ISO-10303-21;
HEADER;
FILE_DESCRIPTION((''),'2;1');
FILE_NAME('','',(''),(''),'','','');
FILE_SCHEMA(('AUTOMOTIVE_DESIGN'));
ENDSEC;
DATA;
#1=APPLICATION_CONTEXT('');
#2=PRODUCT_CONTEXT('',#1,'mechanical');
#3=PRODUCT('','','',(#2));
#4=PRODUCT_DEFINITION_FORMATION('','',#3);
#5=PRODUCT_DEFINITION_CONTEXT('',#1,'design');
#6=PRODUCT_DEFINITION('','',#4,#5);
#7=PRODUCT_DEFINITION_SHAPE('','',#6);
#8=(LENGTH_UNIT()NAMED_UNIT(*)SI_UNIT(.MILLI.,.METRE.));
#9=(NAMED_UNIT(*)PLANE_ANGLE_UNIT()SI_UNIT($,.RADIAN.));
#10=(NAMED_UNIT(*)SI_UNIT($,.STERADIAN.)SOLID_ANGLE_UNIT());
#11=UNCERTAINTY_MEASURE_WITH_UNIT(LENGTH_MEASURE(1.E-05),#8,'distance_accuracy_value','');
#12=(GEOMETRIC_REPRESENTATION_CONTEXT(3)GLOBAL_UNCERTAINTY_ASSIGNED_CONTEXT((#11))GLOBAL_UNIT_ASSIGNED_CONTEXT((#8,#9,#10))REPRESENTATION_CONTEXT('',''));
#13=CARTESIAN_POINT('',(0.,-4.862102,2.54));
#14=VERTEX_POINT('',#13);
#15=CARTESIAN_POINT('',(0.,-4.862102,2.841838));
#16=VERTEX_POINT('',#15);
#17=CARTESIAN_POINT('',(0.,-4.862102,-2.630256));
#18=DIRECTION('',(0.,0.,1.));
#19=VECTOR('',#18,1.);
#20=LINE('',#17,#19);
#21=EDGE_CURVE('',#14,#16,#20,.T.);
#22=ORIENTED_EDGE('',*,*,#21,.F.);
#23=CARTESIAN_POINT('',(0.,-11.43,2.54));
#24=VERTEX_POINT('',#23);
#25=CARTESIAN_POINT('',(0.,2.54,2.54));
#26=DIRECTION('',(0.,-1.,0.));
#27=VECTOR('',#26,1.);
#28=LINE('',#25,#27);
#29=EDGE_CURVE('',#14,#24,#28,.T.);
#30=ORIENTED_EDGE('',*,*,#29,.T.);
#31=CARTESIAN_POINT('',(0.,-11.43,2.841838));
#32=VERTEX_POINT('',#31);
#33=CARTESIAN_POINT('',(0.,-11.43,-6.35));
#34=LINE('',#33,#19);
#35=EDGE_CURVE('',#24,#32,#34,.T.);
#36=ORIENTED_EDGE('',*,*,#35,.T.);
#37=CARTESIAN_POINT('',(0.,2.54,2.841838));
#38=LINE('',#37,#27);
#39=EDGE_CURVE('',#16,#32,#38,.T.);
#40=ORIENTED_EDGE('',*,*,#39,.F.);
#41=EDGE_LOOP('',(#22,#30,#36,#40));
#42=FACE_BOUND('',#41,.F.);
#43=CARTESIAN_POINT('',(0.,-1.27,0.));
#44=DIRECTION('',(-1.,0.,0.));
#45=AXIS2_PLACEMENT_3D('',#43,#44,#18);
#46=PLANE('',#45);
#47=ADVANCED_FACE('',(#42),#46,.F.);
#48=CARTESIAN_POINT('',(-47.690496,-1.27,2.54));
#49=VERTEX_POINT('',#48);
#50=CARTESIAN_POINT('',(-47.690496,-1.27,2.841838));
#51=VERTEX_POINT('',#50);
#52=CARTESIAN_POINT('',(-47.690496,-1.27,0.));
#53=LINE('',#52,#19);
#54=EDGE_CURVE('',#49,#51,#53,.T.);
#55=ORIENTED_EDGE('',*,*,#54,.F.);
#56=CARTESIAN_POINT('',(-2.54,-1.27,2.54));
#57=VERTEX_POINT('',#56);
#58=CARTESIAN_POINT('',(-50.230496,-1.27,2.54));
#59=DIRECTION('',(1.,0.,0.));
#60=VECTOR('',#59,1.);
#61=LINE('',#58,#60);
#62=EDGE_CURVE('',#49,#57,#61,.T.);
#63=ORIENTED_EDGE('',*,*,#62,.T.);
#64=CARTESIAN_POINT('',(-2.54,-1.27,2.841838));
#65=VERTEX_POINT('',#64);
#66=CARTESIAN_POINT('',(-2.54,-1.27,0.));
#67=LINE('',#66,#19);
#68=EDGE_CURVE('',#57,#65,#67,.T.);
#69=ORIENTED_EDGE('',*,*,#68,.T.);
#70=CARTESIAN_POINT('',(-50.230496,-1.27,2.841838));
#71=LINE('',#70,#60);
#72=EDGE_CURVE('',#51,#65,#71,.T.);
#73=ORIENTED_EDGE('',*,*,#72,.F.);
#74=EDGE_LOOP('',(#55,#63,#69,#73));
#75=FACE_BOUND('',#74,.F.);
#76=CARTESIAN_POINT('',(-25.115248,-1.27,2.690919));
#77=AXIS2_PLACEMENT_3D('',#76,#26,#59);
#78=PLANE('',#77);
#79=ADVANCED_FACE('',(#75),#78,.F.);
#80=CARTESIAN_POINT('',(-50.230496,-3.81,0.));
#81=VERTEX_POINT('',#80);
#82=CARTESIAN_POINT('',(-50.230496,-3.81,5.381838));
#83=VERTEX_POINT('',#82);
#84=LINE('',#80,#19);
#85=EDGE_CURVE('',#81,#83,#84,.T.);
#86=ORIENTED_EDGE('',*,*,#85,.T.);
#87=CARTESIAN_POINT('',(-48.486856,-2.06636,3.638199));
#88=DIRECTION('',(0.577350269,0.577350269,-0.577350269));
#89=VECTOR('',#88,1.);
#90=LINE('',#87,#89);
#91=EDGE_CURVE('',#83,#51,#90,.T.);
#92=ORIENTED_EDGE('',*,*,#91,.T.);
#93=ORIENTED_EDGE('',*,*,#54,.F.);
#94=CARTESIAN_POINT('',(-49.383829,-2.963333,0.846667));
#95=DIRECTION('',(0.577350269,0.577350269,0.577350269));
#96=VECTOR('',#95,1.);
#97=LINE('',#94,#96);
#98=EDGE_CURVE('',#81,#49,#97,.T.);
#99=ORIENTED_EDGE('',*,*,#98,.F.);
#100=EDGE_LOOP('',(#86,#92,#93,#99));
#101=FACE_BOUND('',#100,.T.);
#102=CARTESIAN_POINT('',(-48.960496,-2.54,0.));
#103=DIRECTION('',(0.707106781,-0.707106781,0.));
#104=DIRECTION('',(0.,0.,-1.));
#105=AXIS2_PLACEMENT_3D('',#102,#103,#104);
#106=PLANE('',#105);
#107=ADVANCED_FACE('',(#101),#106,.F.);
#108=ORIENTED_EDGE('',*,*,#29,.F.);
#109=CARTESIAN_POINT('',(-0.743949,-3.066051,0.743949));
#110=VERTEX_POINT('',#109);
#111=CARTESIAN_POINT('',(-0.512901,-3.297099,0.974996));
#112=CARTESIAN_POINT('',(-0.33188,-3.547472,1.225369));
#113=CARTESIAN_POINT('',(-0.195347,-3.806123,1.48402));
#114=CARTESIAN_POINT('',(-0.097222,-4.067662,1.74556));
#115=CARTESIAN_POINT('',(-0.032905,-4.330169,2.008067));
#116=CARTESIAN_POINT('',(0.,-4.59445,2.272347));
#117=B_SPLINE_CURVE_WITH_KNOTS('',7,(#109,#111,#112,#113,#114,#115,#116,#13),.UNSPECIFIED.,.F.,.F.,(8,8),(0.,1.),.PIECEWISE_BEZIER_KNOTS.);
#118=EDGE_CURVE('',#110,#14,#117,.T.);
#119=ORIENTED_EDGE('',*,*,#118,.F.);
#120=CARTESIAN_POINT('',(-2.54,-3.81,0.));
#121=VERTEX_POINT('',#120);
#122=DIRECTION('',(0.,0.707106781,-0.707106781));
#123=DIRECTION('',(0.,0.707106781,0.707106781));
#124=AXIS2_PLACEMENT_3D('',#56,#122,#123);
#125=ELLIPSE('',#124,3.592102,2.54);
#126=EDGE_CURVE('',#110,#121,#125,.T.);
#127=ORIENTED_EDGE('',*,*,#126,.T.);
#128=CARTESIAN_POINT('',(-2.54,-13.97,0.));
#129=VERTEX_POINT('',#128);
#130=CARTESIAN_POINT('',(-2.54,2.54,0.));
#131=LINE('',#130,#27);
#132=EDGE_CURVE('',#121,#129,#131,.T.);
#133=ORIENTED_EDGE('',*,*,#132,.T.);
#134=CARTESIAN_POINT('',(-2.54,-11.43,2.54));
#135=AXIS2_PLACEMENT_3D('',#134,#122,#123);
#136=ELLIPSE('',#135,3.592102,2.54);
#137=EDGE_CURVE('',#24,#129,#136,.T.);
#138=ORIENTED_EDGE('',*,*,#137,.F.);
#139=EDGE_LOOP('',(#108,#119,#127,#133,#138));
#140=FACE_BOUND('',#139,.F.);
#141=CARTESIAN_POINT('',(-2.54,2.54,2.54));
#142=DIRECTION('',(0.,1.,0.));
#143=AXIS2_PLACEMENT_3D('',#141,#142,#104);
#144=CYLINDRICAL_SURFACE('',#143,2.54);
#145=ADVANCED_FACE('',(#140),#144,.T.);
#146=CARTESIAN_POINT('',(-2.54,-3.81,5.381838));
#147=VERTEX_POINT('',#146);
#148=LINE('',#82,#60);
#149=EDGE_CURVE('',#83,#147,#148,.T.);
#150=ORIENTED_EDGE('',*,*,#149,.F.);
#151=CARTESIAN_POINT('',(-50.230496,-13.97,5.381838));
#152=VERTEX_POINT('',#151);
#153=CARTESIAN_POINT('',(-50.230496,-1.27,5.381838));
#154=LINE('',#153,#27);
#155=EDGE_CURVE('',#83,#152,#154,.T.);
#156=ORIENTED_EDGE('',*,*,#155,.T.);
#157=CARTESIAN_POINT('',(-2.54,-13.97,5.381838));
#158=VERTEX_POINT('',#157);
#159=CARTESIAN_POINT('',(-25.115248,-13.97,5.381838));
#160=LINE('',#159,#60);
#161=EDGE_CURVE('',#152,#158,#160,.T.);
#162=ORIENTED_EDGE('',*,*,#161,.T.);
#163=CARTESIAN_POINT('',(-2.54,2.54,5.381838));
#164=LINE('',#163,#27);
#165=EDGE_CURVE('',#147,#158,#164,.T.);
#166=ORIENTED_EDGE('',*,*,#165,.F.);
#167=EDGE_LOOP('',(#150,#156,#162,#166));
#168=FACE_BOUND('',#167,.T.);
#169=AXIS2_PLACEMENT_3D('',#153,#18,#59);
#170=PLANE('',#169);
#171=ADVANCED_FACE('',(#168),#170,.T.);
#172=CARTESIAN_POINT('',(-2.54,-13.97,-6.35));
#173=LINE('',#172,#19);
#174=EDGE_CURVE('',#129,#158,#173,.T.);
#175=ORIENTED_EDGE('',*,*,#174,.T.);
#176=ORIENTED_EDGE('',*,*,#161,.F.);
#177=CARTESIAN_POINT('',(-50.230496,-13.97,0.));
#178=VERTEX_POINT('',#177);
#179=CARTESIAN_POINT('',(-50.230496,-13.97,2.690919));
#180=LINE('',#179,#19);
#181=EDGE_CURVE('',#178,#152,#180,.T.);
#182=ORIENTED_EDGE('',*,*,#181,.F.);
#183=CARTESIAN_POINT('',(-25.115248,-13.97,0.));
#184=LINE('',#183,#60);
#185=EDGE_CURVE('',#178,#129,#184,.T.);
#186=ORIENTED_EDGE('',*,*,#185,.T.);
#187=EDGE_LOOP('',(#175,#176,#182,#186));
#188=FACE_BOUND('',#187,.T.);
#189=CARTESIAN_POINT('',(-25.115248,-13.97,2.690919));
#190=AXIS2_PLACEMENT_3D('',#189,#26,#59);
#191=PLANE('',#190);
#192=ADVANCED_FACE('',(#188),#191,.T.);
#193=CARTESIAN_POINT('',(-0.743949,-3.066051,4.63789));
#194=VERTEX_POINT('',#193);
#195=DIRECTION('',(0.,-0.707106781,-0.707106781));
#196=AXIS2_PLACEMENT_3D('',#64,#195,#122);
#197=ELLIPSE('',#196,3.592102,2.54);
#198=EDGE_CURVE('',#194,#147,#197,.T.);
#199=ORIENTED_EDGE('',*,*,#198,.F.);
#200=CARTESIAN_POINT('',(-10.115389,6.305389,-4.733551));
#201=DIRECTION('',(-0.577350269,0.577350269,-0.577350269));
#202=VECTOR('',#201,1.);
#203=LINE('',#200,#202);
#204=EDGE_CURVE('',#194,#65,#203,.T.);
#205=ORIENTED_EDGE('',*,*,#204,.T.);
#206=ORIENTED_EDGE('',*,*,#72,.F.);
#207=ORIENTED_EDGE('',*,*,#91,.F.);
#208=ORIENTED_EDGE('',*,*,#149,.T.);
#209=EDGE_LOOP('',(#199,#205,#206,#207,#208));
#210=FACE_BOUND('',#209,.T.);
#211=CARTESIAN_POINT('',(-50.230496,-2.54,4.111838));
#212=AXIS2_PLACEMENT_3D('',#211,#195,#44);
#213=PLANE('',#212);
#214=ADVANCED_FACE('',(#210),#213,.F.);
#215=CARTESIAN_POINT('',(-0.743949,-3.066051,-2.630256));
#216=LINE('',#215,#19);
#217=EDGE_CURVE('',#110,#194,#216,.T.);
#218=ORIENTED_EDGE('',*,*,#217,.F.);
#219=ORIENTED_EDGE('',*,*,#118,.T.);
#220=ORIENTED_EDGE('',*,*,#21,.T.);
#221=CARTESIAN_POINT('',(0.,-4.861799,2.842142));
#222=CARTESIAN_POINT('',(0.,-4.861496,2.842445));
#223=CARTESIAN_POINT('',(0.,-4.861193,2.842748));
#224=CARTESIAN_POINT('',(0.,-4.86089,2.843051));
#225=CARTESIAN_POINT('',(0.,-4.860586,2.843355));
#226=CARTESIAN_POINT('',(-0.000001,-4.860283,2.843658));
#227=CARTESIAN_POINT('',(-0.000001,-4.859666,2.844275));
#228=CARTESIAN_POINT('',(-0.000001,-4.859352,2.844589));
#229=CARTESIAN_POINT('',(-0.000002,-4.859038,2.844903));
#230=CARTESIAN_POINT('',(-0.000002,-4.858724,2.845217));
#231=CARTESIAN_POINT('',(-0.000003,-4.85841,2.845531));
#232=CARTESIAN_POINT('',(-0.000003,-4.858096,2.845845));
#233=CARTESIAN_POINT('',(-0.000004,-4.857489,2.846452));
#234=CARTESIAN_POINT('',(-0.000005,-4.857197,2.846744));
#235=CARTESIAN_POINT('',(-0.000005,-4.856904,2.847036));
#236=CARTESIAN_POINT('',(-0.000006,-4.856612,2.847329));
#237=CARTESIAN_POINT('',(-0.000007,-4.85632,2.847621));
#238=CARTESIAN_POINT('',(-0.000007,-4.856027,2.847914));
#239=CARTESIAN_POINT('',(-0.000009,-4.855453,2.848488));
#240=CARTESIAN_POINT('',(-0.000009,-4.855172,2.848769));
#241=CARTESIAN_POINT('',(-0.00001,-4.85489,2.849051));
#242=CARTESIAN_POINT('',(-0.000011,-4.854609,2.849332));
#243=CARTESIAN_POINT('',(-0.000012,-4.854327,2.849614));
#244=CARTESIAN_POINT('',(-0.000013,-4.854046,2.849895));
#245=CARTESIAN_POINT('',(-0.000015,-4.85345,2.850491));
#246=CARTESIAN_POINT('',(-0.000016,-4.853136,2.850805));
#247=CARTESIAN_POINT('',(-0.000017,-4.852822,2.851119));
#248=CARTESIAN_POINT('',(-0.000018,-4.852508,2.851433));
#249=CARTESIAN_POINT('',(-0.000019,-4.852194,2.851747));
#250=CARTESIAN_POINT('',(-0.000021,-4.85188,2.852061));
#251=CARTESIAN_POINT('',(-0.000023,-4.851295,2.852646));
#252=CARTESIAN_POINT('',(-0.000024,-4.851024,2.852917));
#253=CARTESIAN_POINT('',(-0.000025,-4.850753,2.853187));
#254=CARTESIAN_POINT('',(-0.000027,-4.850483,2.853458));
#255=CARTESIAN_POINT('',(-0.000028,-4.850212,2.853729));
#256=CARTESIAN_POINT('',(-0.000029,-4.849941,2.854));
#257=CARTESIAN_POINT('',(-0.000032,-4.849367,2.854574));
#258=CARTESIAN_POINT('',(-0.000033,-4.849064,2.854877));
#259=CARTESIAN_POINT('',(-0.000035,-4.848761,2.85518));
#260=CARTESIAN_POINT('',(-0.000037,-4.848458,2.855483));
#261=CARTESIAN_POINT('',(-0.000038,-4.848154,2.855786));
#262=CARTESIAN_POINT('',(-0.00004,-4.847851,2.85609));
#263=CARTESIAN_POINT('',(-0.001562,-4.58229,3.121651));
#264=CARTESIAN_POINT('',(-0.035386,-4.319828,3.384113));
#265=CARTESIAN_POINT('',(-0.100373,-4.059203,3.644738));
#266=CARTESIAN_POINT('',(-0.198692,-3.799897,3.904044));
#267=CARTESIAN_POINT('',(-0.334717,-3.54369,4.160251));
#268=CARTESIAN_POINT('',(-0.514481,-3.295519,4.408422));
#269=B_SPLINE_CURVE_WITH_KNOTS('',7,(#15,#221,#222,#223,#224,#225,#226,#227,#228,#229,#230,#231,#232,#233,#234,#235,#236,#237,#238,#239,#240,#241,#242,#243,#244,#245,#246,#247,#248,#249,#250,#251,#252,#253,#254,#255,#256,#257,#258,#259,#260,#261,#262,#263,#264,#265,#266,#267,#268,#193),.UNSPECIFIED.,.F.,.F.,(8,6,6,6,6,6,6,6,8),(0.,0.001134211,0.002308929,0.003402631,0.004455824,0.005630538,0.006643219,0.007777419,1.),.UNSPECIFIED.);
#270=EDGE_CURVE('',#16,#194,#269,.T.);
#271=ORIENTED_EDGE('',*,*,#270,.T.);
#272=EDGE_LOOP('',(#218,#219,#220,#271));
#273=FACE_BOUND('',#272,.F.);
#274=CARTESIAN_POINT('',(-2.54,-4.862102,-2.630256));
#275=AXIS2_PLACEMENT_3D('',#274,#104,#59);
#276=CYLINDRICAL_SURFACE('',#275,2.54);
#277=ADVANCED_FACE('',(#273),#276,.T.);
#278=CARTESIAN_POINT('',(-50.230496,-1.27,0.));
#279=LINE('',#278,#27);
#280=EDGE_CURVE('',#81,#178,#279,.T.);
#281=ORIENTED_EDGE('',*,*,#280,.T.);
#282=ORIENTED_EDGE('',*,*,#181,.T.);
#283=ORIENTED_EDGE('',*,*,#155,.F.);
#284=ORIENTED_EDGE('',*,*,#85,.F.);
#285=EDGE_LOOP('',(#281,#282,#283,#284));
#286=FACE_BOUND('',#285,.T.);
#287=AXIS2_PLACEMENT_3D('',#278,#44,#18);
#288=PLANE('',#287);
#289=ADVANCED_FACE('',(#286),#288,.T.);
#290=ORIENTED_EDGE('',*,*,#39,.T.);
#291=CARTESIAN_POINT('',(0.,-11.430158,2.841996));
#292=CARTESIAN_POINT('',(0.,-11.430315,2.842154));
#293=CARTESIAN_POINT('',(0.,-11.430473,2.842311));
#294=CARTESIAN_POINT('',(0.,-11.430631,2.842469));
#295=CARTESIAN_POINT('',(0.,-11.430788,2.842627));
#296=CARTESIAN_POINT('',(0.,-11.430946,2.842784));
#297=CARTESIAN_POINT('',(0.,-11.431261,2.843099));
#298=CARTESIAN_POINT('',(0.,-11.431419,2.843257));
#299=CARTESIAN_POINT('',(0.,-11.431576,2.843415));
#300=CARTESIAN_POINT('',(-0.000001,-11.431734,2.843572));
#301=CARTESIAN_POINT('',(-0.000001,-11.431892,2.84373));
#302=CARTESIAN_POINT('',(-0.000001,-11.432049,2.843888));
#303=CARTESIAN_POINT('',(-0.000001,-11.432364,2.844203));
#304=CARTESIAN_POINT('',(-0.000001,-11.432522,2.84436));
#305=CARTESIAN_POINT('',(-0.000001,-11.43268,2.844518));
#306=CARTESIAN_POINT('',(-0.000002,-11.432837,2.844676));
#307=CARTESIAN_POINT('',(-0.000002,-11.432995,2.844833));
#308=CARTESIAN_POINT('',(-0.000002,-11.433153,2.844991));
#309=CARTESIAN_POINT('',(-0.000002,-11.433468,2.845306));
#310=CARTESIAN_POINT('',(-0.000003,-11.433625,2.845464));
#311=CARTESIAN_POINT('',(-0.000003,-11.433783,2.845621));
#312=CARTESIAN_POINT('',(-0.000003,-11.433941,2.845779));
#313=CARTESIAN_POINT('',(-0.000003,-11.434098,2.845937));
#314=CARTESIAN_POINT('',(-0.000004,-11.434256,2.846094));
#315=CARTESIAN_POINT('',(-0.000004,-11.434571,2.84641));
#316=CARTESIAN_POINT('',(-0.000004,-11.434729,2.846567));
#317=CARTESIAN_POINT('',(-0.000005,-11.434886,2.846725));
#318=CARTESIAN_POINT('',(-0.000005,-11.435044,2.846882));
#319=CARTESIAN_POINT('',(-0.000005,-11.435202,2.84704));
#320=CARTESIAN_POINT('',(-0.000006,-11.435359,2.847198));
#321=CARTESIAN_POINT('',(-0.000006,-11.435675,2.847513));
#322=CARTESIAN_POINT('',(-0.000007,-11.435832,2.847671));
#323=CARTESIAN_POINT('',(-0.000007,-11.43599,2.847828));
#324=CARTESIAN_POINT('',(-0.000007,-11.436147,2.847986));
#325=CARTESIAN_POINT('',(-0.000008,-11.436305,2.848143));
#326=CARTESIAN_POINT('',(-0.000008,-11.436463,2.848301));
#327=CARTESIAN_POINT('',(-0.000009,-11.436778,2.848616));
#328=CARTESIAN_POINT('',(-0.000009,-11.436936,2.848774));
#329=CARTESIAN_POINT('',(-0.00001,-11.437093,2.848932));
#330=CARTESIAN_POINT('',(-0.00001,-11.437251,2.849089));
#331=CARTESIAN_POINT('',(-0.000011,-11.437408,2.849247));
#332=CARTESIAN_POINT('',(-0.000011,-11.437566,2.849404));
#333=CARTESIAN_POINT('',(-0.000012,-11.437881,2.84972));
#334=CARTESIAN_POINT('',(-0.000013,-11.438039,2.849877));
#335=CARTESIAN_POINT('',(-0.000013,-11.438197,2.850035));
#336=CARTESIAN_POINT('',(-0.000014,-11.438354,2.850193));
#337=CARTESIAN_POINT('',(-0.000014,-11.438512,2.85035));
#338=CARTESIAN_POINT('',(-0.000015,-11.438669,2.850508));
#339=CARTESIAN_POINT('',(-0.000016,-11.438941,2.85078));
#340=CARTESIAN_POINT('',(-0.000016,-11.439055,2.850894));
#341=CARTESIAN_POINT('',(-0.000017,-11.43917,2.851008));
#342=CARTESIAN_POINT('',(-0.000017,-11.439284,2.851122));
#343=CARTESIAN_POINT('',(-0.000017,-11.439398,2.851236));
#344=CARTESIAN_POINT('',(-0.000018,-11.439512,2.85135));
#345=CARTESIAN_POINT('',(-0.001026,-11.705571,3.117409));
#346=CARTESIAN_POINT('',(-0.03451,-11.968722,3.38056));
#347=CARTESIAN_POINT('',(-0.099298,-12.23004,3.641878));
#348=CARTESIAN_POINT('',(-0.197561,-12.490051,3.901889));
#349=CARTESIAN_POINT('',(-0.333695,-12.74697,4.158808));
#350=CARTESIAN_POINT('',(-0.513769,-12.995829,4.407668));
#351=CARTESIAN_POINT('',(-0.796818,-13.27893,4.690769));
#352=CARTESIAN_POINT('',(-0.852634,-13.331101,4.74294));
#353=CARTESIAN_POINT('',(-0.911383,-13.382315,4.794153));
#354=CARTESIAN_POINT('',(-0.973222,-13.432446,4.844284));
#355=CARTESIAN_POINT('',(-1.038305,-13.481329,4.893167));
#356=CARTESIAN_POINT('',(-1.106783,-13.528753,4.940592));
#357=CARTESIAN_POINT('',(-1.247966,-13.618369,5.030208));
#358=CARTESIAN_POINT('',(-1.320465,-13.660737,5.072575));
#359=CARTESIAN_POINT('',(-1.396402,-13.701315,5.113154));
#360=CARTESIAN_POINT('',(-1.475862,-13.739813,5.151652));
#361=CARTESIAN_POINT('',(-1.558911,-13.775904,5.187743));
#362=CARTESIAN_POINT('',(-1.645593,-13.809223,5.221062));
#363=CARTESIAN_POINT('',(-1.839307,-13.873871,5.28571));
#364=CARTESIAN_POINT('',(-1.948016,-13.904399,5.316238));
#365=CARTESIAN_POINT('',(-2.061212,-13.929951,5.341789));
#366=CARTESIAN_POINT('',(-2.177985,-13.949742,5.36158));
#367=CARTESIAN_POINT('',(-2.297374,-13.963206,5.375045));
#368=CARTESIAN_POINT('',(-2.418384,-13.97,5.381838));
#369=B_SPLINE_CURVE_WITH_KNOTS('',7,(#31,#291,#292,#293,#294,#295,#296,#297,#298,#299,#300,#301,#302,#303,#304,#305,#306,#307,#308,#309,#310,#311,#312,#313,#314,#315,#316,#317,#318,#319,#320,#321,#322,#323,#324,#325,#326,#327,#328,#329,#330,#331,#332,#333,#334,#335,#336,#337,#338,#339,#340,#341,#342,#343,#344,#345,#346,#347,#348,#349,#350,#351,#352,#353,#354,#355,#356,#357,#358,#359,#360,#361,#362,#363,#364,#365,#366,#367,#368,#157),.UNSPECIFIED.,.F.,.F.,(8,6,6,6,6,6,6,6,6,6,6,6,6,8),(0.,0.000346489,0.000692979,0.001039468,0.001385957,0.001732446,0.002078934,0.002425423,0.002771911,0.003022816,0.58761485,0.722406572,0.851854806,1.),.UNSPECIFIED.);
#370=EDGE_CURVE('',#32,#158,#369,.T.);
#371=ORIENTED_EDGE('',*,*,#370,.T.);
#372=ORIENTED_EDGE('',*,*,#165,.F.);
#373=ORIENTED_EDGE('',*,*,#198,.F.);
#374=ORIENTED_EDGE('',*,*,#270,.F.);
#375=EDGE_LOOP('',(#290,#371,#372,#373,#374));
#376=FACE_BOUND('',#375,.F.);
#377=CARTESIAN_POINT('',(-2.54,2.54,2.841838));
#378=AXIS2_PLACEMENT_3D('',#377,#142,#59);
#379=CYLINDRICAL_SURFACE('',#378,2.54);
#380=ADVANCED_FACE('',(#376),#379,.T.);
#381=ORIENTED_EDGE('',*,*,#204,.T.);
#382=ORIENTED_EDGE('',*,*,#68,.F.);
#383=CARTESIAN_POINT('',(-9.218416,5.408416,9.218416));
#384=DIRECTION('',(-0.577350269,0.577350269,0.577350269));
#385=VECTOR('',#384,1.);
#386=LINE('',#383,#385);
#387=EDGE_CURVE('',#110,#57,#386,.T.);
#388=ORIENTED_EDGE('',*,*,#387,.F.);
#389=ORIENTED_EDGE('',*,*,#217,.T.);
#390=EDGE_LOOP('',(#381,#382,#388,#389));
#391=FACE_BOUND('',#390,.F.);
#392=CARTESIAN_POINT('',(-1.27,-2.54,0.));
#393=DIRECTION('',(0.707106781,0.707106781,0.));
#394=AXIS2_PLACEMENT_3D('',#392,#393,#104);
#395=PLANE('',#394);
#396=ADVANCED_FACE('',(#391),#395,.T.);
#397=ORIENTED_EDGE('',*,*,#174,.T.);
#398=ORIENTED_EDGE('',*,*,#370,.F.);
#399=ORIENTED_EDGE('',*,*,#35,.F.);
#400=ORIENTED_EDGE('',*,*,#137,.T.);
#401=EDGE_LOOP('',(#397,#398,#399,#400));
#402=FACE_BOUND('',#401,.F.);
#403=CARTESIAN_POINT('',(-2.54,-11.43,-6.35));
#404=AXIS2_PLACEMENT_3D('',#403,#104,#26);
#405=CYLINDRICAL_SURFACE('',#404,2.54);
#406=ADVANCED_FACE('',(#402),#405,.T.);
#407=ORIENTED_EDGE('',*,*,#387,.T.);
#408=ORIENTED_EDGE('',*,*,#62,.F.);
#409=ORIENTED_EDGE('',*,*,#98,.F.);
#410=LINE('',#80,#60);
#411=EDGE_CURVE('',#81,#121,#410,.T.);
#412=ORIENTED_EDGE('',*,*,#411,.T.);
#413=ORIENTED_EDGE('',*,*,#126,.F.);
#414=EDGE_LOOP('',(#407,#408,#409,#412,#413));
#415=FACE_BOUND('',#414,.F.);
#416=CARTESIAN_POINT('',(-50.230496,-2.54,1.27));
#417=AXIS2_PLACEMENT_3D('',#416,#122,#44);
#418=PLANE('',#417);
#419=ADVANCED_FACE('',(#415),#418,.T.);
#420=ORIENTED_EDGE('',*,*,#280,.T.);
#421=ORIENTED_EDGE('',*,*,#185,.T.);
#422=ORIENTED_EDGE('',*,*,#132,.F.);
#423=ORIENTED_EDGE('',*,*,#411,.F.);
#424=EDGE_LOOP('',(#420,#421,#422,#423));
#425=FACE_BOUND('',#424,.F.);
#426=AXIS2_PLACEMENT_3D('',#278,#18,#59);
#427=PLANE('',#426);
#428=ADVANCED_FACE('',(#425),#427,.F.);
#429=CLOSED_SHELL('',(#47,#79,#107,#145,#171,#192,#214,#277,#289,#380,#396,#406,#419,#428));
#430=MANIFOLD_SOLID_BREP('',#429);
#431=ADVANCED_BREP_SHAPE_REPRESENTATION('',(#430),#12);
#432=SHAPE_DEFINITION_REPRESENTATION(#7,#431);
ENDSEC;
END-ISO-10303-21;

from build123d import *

# Parameters (mm, degrees)
F1_DEPTH    = 1.27
F2_W        = 50.2304956317
F2_H        = 5.3818384185
F3_DEPTH    = 12.7
F5_SIZE     = 2.54
F6_T1_DEPTH = 22.86
F6_T3_DEPTH = 10.6423506607
F6_T5_DEPTH = 18.0818384185


# Not quite as in the source:
# - a fillet or chamfer that OpenCascade refuses, or shapes differently, is made with other operations: its cross-section is extruded or revolved along the edge and cut away or added


with BuildPart() as f1:
    # F0 (on Front) → F1 (new body)
    with BuildSketch(Plane.XZ):
        with BuildLine():
            ThreePointArc((3.2290674407, 2.4202670825), (3.8285241608, 1.2755281407), (4.0354143885, 0))
            ThreePointArc((4.0354143885, 0), (3.8285241608, -1.2755281407), (3.2290674407, -2.4202670825))
            Line((3.2290674407, -2.4202670825), (3.2290674407, -2.6700689923))
            Line((3.2290674407, -2.6700689923), (53.7696667016, -2.6700689923))
            Line((53.7696667016, -2.6700689923), (53.7696667016, 2.4202670825))
            Line((53.7696667016, 2.4202670825), (3.2290674407, 2.4202670825))
        make_face()
    extrude(amount=F1_DEPTH)


with BuildPart() as f3:
    # F2 (on face) → F3 (new body)
    with BuildSketch(Plane.XZ.offset(1.27)):
        with Locations((-25.1152478158, 2.6909192093)):
            Rectangle(F2_W, F2_H)
    extrude(amount=F3_DEPTH)

    # F5
    f5_edges = [f3.edges().sort_by_distance(p)[0] for p in [
        (-25.115248, -1.27, 0),
        (0, -1.27, 2.690919),
        (-25.115248, -1.27, 5.381838),
        (-50.230496, -1.27, 2.690919),
    ]]
    chamfer(f5_edges, length=F5_SIZE)

    # F6: fillet of radius 2.54 on 4 edges, made by hand

    # F6_s2 → F6_t1 (cut)
    with BuildSketch(Plane.XZ.offset(-2.54)):
        with BuildLine():
            ThreePointArc((-2.54, 0), (-0.7439487758, 0.7439487758), (0, 2.54))
            Line((0, 2.54), (0, 0))
            Line((0, 0), (-2.54, 0))
        make_face()
        with BuildLine():
            ThreePointArc((0, 2.8418384185), (-0.7439487758, 4.6378896428), (-2.54, 5.3818384185))
            Line((-2.54, 5.3818384185), (0, 5.3818384185))
            Line((0, 5.3818384185), (0, 2.8418384185))
        make_face()
    extrude(amount=F6_T1_DEPTH, mode=Mode.SUBTRACT)

    # F6_s4 → F6_t3 (cut)
    with BuildSketch(Plane.XY.offset(-2.6302561211)):
        with BuildLine():
            ThreePointArc((0, -4.8621024484), (-0.1933459874, -3.8900865302), (-0.7439487758, -3.0660512242))
            Line((-0.7439487758, -3.0660512242), (0, -3.81))
            Line((0, -3.81), (0, -4.8621024484))
        make_face()
    extrude(amount=F6_T3_DEPTH, mode=Mode.SUBTRACT)

    # F6_s6 → F6_t5 (cut)
    with BuildSketch(Plane.XY.offset(-6.35)):
        with BuildLine():
            ThreePointArc((-2.54, -13.97), (-0.7439487758, -13.2260512242), (0, -11.43))
            Line((0, -11.43), (0, -13.97))
            Line((0, -13.97), (-2.54, -13.97))
        make_face()
    extrude(amount=F6_T5_DEPTH, mode=Mode.SUBTRACT)


solid = f3.part
